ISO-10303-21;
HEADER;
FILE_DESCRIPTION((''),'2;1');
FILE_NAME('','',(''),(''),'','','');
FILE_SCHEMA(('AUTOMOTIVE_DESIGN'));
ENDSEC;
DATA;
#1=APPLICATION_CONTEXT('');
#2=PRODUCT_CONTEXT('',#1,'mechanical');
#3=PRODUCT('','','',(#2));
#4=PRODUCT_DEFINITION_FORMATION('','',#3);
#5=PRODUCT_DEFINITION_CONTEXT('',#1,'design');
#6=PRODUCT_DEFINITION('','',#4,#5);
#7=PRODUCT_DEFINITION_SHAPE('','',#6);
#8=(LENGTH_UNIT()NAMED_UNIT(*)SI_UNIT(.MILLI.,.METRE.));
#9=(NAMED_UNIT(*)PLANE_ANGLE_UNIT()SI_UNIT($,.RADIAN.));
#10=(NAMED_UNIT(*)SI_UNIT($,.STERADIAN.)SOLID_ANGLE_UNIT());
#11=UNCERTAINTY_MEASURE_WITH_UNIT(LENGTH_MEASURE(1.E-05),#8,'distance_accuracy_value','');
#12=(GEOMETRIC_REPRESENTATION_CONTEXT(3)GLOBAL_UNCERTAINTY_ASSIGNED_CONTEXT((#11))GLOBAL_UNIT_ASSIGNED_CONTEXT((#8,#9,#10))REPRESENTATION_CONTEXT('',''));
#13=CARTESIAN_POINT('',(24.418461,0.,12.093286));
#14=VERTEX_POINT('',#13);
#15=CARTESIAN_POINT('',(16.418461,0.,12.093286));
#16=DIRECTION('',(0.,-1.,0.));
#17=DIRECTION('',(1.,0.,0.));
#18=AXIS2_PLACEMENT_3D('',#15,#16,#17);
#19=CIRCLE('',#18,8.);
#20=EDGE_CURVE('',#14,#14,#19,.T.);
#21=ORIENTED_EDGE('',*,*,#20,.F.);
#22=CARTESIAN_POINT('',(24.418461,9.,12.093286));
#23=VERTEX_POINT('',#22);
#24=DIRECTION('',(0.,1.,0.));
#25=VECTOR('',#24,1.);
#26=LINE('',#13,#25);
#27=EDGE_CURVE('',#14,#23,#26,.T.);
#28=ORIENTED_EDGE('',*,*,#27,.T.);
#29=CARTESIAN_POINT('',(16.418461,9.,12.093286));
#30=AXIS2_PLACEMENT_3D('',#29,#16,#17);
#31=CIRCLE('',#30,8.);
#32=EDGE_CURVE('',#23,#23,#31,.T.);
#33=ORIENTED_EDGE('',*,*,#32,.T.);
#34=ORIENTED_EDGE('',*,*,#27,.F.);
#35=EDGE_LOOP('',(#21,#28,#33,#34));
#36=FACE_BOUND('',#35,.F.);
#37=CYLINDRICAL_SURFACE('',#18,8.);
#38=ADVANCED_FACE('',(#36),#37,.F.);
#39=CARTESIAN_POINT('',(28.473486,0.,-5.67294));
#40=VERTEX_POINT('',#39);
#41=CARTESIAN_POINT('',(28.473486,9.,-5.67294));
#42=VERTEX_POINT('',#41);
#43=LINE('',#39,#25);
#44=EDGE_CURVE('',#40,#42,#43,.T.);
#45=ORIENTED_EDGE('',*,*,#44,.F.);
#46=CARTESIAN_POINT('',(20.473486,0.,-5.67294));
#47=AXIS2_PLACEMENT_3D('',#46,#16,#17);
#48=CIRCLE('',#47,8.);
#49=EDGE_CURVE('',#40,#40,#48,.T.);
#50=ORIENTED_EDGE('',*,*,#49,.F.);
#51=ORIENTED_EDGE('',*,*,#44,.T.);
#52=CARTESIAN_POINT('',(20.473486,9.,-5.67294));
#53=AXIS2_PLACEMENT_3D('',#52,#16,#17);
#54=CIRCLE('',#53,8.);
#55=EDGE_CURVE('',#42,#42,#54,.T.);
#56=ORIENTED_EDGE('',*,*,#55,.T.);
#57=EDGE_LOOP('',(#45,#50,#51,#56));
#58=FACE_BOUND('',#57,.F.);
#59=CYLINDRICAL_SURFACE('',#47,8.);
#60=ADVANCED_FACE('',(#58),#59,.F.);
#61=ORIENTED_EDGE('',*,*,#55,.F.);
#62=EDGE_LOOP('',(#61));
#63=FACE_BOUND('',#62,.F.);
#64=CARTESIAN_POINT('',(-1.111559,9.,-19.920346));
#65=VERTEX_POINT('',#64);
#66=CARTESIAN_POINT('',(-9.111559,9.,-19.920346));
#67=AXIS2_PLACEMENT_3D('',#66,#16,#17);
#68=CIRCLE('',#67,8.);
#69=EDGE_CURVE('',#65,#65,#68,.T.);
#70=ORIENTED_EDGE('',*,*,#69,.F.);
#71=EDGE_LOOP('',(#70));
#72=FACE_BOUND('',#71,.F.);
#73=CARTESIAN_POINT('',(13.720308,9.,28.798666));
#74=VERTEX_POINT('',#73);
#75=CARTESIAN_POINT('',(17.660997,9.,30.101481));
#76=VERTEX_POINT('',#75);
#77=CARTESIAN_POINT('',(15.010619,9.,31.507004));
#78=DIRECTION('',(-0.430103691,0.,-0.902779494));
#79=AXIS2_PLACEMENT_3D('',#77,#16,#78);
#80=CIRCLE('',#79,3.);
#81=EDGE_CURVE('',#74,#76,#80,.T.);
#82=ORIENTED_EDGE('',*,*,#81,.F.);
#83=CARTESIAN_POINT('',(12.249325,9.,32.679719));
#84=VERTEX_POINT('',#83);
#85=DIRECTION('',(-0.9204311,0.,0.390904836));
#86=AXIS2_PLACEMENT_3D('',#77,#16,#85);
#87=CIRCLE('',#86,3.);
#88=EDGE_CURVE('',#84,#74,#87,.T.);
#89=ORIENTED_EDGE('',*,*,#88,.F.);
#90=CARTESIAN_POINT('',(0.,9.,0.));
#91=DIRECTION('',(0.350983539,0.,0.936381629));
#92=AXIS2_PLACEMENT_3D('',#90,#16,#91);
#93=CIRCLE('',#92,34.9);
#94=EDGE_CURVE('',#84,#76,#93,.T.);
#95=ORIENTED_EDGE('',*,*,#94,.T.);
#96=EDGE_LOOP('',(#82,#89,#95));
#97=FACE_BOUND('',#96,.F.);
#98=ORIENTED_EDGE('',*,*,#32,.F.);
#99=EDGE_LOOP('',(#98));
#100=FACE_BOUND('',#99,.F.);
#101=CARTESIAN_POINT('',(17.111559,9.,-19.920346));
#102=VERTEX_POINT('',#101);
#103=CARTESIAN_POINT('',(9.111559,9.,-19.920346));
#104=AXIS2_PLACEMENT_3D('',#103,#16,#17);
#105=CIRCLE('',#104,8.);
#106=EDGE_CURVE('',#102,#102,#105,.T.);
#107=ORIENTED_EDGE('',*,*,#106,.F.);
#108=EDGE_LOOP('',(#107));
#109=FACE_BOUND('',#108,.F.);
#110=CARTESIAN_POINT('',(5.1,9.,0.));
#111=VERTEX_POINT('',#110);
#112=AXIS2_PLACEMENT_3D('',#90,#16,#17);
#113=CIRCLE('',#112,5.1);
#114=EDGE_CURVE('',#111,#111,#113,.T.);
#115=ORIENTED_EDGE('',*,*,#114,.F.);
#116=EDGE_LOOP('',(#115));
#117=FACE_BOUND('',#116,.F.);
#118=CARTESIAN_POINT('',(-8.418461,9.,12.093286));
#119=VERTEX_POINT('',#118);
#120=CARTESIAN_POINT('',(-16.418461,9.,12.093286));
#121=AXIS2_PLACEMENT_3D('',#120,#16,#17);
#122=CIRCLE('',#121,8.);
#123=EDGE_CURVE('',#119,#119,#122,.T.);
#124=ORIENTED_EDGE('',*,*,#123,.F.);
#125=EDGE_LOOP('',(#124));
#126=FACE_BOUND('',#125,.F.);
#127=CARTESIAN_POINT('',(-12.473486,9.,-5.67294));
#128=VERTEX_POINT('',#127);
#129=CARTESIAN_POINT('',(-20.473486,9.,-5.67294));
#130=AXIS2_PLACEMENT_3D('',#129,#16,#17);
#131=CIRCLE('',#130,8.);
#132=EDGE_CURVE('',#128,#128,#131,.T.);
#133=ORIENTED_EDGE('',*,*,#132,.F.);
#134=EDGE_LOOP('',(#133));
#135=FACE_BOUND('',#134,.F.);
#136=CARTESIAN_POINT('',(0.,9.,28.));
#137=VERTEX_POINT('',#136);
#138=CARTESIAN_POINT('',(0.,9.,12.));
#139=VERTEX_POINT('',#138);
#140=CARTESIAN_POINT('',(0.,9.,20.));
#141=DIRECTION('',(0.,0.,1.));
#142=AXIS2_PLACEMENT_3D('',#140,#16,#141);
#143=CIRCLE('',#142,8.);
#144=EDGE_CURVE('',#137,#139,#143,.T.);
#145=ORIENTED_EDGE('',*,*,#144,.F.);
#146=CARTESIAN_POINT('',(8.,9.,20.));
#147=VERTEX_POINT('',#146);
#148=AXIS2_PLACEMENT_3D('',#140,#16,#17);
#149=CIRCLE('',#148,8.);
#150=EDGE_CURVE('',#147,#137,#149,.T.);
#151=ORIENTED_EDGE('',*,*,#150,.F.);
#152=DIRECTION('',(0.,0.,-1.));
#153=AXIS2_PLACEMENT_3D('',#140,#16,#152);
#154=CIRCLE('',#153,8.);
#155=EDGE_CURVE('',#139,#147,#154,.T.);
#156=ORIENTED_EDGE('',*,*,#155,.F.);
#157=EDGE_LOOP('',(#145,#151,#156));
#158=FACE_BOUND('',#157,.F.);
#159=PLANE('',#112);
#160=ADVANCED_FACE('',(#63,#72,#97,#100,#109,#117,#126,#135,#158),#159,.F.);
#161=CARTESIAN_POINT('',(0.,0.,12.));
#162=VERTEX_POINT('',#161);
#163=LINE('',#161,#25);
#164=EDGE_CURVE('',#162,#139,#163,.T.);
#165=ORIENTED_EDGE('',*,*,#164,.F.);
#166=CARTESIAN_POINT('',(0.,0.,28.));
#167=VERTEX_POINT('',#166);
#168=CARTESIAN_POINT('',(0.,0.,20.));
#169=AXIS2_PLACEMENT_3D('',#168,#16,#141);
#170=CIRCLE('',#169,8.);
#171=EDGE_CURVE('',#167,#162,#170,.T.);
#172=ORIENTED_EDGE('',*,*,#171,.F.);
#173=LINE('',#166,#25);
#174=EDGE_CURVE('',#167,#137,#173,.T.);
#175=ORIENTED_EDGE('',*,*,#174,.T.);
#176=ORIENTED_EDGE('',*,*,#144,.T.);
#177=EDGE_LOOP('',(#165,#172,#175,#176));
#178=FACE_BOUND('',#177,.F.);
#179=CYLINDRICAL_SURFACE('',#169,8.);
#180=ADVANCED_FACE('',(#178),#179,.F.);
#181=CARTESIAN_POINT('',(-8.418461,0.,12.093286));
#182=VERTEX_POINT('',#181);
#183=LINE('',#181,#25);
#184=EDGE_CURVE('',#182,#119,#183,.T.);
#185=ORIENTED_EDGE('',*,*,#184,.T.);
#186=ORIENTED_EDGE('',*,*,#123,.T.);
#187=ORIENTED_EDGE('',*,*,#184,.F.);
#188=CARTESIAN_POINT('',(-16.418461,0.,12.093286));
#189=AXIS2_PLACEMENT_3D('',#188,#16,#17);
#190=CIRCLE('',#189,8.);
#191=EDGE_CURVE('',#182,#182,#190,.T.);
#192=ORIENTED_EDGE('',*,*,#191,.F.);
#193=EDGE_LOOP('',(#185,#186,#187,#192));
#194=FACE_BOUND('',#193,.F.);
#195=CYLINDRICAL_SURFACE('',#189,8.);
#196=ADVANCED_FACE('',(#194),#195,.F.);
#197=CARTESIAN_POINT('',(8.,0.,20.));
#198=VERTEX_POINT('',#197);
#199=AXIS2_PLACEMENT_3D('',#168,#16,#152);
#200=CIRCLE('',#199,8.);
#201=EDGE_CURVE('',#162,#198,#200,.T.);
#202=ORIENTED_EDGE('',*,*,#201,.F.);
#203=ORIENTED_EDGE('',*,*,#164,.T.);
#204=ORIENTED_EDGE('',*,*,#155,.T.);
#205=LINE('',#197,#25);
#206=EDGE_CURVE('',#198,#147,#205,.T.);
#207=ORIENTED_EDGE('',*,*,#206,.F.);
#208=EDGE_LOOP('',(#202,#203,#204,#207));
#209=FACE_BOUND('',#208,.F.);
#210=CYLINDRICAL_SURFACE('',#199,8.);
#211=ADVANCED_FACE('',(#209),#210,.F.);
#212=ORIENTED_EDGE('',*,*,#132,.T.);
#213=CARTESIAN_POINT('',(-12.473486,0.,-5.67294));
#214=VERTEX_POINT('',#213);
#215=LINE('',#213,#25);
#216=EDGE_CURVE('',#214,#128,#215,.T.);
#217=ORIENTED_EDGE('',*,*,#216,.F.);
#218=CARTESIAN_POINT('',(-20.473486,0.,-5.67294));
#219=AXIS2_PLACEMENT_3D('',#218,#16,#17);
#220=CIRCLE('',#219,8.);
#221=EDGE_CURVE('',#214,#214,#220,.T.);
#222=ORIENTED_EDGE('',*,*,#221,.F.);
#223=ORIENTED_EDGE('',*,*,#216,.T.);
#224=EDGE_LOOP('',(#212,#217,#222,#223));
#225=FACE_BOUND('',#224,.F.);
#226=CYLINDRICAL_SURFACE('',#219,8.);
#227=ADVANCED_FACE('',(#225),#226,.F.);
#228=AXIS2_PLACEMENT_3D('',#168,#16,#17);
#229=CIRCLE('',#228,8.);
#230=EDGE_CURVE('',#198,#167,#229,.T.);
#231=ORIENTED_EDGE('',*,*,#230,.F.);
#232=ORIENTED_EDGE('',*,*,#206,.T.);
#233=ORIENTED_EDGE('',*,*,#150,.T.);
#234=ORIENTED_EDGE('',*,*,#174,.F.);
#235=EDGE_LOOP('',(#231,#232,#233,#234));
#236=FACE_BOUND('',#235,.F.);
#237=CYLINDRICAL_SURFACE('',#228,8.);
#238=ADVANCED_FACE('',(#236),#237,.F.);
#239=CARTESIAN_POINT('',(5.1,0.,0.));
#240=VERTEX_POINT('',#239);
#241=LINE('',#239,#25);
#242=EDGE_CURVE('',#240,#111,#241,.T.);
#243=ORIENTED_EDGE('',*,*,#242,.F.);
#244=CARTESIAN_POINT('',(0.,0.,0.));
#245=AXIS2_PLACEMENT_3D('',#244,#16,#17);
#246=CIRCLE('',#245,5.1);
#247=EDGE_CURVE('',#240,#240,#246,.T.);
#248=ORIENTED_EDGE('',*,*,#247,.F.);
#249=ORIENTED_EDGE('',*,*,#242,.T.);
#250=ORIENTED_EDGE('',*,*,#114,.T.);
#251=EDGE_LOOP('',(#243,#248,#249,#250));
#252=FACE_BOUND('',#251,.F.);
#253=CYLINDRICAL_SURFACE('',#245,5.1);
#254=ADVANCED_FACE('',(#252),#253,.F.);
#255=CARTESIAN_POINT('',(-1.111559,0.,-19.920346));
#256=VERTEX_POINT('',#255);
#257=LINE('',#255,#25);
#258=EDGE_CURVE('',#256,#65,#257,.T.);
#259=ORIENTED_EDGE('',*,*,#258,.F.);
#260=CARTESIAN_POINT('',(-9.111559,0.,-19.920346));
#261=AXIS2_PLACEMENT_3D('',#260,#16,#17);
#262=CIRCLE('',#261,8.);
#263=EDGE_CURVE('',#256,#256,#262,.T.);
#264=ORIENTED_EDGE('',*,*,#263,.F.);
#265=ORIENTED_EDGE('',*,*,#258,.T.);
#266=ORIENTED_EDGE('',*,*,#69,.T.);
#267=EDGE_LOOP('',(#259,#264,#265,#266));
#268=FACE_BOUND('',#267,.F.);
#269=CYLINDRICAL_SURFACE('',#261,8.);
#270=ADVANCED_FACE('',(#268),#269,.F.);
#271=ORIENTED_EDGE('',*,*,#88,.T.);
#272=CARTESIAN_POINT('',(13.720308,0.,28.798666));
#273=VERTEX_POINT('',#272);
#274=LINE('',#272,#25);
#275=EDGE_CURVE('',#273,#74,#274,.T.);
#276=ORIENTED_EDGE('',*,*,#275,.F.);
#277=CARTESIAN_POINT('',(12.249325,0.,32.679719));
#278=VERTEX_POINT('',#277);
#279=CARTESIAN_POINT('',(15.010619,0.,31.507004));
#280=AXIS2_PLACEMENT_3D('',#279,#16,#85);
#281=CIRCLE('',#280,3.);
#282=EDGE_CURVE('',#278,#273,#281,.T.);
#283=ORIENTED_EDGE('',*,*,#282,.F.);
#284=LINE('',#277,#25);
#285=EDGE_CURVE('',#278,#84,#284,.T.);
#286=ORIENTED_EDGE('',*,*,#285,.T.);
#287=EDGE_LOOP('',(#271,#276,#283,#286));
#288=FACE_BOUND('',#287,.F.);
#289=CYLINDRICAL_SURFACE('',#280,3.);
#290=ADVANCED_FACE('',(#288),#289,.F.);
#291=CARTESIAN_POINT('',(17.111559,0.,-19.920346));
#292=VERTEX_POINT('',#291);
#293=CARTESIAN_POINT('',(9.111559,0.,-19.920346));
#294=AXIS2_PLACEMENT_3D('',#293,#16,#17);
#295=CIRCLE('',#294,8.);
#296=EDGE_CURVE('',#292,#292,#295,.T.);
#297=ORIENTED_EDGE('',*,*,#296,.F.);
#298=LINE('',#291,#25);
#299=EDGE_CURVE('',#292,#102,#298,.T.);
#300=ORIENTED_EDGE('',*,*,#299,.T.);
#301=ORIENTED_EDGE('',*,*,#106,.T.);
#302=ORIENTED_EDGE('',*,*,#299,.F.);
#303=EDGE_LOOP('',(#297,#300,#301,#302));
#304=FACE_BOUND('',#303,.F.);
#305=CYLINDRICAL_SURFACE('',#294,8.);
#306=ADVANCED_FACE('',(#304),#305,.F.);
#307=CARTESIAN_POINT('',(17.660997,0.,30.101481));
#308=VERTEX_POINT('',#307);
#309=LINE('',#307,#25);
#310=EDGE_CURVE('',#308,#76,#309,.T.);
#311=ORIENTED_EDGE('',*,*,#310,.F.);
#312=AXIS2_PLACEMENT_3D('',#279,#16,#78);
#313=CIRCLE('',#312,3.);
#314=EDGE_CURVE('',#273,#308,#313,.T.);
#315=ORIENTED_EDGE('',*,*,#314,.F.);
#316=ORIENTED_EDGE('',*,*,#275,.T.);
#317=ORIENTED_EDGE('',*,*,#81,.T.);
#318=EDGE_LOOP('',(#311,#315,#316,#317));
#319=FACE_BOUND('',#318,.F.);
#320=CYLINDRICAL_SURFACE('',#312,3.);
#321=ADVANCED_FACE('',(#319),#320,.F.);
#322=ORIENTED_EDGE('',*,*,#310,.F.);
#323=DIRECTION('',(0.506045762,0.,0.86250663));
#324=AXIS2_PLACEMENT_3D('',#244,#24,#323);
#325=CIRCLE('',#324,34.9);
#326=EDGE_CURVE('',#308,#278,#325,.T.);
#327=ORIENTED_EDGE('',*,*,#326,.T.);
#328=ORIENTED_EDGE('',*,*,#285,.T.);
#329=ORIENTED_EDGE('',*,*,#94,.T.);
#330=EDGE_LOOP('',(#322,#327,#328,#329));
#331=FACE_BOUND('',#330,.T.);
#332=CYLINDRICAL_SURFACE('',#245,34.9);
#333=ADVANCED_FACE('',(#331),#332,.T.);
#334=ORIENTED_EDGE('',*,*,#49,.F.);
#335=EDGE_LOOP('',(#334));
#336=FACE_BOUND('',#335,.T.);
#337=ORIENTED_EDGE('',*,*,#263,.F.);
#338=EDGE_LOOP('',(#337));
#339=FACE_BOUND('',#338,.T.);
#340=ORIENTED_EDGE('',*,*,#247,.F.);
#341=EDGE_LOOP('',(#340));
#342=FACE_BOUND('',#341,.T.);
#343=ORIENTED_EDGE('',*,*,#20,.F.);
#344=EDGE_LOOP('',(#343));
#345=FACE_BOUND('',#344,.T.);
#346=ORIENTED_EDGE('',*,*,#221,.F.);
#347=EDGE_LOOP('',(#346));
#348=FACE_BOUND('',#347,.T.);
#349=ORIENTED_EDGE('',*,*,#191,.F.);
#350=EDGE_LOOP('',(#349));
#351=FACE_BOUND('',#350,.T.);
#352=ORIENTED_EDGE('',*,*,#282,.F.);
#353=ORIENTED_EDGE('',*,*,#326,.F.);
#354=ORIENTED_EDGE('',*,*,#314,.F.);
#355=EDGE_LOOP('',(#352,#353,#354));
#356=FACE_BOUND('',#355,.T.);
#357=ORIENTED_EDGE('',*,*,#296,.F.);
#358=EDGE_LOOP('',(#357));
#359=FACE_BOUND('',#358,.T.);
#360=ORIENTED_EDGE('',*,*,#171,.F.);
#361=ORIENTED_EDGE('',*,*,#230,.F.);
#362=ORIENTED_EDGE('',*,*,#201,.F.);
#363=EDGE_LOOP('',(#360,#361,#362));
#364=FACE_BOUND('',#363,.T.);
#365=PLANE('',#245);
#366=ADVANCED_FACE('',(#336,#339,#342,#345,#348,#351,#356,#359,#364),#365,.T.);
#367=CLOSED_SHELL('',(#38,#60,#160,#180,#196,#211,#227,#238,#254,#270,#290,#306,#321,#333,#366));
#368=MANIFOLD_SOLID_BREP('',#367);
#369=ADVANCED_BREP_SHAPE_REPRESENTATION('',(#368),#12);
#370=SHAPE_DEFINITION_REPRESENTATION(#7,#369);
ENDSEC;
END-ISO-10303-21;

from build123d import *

# Parameters (mm, degrees)
F0_R     = 34.9
F0_R_2   = 5.1
F1_DEPTH = 9
F2_R     = 8
F3_DEPTH = 10
F5_DEPTH = 10


# Not quite as in the source:
# - a feature names something its author has since deleted; it is built from what else it names


with BuildPart() as f1:
    # F0 (on Front) → F1 (new body)
    with BuildSketch(Plane.XZ):
        Circle(F0_R)
        Circle(F0_R_2, mode=Mode.SUBTRACT)
    extrude(amount=-F1_DEPTH)

    # F2 (on Front) → F3 (cut)
    with BuildSketch(Plane.XZ):
        with Locations((-16.4184611318, 12.093285839)):
            Circle(F2_R)
        with Locations((-20.4734861558, -5.6729396131)):
            Circle(F2_R)
        with Locations((-9.1115585215, -19.920346226)):
            Circle(F2_R)
        with Locations((9.1115585215, -19.920346226)):
            Circle(F2_R)
        with Locations((20.4734861558, -5.6729396131)):
            Circle(F2_R)
        with BuildLine():
            ThreePointArc((8, 20), (5.6568542495, 25.6568542495), (0, 28))
            Line((0, 28), (0, 12))
            ThreePointArc((0, 12), (5.6568542495, 14.3431457505), (8, 20))
        make_face()
        with BuildLine():
            Line((0, 12), (0, 28))
            ThreePointArc((0, 28), (-8, 20), (0, 12))
        make_face()
        with Locations((16.4184611318, 12.093285839)):
            Circle(F2_R)
    extrude(amount=-F3_DEPTH, mode=Mode.SUBTRACT)

    # F4 (on face) → F5 (cut)
    with BuildSketch(Plane.XZ):
        with BuildLine():
            ThreePointArc((12.2493254993, 32.6797188607), (12.2053527551, 30.4437628813), (13.7203077268, 28.7986658698))
            Line((13.7203077268, 28.7986658698), (15.0106187983, 31.5070043529))
            ThreePointArc((15.0106187983, 31.5070043529), (13.6425787741, 32.1230453786), (12.2493254993, 32.6797188607))
        make_face()
        with BuildLine():
            Line((15.0106187983, 31.5070043529), (13.7203077268, 28.7986658698))
            ThreePointArc((13.7203077268, 28.7986658698), (15.9523075922, 28.6586324994), (17.6609971055, 30.1014813795))
            ThreePointArc((17.6609971055, 30.1014813795), (16.3509172571, 30.8327343071), (15.0106187983, 31.5070043529))
        make_face()
    extrude(amount=-F5_DEPTH, mode=Mode.SUBTRACT)


solid = f1.part
